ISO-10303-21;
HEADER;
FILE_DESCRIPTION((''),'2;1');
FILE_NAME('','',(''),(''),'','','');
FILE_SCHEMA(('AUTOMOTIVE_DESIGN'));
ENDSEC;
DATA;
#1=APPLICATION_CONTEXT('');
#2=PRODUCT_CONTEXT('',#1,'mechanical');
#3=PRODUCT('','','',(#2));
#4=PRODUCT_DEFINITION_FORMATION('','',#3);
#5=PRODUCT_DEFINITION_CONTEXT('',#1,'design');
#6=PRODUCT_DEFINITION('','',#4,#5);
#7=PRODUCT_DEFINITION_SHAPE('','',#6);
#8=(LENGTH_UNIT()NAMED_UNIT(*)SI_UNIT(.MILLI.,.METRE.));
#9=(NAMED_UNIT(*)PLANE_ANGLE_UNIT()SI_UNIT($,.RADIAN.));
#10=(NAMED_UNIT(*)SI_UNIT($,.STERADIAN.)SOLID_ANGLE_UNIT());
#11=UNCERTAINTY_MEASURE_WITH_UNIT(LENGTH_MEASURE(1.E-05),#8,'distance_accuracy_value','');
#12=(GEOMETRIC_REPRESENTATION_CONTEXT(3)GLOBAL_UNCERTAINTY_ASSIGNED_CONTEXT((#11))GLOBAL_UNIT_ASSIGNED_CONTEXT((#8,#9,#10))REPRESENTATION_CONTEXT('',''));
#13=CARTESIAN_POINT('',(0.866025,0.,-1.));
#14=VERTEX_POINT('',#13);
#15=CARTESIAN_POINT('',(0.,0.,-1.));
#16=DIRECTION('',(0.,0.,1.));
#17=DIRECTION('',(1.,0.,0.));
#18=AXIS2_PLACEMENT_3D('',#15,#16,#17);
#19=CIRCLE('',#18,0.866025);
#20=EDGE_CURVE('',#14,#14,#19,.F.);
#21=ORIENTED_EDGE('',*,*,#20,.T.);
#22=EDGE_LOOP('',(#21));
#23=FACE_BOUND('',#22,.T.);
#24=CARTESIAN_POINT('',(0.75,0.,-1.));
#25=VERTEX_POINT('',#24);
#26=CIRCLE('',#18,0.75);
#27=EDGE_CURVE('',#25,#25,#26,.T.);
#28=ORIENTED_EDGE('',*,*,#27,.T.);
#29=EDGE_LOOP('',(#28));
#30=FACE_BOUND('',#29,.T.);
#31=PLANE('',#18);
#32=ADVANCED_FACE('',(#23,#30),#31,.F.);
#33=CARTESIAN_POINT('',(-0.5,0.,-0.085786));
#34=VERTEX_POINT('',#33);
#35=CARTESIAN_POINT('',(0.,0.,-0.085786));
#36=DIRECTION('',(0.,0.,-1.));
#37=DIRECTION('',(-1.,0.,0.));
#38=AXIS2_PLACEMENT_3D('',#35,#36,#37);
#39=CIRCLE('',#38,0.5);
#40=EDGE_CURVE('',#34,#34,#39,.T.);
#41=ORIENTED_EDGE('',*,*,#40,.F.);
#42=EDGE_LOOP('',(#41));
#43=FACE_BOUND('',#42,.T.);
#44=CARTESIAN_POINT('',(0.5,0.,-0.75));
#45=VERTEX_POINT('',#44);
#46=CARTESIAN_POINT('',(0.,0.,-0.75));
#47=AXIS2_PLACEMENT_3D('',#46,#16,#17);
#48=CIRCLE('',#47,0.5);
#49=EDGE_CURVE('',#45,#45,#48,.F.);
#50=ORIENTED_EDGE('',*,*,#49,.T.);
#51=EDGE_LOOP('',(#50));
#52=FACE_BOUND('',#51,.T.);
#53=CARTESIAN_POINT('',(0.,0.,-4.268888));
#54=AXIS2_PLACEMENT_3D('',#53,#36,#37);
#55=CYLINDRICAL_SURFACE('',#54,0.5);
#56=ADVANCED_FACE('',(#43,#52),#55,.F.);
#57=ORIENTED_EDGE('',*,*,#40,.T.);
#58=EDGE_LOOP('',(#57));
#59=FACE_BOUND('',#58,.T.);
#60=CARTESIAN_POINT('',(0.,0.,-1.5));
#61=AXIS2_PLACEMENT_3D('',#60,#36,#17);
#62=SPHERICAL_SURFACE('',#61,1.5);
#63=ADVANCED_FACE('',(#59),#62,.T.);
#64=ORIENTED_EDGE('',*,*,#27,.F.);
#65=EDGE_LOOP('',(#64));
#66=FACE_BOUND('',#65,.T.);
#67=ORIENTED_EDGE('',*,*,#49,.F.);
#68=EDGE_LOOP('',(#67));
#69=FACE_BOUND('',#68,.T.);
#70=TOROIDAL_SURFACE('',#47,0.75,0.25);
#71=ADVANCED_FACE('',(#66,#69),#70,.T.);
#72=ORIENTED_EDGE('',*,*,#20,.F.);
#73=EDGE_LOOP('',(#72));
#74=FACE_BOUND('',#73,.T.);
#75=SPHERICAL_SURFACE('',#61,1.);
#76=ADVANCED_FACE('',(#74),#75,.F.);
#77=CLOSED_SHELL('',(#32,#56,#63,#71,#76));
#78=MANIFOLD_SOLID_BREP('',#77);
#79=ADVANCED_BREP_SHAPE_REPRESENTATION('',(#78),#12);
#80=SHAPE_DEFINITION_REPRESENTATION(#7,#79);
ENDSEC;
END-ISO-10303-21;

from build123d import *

# Parameters (mm, degrees)
FILLET1_R = 0.25


# Read off the part's stored shape, not the designer's step: Shell1
with BuildPart() as part:
    # Sketch1 → Revolve1 (revolve)
    with BuildSketch(Plane(origin=(0, 0, 0), x_dir=(1, 0, 0), z_dir=(0, 1, 0)), mode=Mode.PRIVATE) as revolve1_sk:
        with BuildLine():
            Line((0, 1), (-0.5, 1))
            Line((-0.5, 1), (-0.5, 0.085786438))
            ThreePointArc((-0.5, 0.085786438), (-1.478397839, 1.753652968), (0, 3))
            Line((0, 3), (0, 1))
        make_face()
    revolve(revolve1_sk.sketch.rotate(Axis((0, 0, -4.268887564), (0, 0, 1)), 180), axis=Axis((0, 0, -4.268887564), (0, 0, 1)))

    # Shell1 outline → Shell1 (revolve, cut)
    with BuildSketch(Plane.XZ):
        with BuildLine():
            Line((0.866025403, -1), (0, -0.999999999))
            Line((0, -0.999999999), (0, -2.5))
            ThreePointArc((0, -2.5), (0.866025404, -2), (0.866025403, -1))
        make_face()
    revolve(axis=Axis((0, 0, 0), (0, 0, 1)), mode=Mode.SUBTRACT)

    # Fillet1
    fillet1_edges = [part.edges().sort_by_distance(p)[0] for p in [
        (-0.5, 0, -1),
    ]]
    fillet(fillet1_edges, radius=FILLET1_R)


solid = part.part
